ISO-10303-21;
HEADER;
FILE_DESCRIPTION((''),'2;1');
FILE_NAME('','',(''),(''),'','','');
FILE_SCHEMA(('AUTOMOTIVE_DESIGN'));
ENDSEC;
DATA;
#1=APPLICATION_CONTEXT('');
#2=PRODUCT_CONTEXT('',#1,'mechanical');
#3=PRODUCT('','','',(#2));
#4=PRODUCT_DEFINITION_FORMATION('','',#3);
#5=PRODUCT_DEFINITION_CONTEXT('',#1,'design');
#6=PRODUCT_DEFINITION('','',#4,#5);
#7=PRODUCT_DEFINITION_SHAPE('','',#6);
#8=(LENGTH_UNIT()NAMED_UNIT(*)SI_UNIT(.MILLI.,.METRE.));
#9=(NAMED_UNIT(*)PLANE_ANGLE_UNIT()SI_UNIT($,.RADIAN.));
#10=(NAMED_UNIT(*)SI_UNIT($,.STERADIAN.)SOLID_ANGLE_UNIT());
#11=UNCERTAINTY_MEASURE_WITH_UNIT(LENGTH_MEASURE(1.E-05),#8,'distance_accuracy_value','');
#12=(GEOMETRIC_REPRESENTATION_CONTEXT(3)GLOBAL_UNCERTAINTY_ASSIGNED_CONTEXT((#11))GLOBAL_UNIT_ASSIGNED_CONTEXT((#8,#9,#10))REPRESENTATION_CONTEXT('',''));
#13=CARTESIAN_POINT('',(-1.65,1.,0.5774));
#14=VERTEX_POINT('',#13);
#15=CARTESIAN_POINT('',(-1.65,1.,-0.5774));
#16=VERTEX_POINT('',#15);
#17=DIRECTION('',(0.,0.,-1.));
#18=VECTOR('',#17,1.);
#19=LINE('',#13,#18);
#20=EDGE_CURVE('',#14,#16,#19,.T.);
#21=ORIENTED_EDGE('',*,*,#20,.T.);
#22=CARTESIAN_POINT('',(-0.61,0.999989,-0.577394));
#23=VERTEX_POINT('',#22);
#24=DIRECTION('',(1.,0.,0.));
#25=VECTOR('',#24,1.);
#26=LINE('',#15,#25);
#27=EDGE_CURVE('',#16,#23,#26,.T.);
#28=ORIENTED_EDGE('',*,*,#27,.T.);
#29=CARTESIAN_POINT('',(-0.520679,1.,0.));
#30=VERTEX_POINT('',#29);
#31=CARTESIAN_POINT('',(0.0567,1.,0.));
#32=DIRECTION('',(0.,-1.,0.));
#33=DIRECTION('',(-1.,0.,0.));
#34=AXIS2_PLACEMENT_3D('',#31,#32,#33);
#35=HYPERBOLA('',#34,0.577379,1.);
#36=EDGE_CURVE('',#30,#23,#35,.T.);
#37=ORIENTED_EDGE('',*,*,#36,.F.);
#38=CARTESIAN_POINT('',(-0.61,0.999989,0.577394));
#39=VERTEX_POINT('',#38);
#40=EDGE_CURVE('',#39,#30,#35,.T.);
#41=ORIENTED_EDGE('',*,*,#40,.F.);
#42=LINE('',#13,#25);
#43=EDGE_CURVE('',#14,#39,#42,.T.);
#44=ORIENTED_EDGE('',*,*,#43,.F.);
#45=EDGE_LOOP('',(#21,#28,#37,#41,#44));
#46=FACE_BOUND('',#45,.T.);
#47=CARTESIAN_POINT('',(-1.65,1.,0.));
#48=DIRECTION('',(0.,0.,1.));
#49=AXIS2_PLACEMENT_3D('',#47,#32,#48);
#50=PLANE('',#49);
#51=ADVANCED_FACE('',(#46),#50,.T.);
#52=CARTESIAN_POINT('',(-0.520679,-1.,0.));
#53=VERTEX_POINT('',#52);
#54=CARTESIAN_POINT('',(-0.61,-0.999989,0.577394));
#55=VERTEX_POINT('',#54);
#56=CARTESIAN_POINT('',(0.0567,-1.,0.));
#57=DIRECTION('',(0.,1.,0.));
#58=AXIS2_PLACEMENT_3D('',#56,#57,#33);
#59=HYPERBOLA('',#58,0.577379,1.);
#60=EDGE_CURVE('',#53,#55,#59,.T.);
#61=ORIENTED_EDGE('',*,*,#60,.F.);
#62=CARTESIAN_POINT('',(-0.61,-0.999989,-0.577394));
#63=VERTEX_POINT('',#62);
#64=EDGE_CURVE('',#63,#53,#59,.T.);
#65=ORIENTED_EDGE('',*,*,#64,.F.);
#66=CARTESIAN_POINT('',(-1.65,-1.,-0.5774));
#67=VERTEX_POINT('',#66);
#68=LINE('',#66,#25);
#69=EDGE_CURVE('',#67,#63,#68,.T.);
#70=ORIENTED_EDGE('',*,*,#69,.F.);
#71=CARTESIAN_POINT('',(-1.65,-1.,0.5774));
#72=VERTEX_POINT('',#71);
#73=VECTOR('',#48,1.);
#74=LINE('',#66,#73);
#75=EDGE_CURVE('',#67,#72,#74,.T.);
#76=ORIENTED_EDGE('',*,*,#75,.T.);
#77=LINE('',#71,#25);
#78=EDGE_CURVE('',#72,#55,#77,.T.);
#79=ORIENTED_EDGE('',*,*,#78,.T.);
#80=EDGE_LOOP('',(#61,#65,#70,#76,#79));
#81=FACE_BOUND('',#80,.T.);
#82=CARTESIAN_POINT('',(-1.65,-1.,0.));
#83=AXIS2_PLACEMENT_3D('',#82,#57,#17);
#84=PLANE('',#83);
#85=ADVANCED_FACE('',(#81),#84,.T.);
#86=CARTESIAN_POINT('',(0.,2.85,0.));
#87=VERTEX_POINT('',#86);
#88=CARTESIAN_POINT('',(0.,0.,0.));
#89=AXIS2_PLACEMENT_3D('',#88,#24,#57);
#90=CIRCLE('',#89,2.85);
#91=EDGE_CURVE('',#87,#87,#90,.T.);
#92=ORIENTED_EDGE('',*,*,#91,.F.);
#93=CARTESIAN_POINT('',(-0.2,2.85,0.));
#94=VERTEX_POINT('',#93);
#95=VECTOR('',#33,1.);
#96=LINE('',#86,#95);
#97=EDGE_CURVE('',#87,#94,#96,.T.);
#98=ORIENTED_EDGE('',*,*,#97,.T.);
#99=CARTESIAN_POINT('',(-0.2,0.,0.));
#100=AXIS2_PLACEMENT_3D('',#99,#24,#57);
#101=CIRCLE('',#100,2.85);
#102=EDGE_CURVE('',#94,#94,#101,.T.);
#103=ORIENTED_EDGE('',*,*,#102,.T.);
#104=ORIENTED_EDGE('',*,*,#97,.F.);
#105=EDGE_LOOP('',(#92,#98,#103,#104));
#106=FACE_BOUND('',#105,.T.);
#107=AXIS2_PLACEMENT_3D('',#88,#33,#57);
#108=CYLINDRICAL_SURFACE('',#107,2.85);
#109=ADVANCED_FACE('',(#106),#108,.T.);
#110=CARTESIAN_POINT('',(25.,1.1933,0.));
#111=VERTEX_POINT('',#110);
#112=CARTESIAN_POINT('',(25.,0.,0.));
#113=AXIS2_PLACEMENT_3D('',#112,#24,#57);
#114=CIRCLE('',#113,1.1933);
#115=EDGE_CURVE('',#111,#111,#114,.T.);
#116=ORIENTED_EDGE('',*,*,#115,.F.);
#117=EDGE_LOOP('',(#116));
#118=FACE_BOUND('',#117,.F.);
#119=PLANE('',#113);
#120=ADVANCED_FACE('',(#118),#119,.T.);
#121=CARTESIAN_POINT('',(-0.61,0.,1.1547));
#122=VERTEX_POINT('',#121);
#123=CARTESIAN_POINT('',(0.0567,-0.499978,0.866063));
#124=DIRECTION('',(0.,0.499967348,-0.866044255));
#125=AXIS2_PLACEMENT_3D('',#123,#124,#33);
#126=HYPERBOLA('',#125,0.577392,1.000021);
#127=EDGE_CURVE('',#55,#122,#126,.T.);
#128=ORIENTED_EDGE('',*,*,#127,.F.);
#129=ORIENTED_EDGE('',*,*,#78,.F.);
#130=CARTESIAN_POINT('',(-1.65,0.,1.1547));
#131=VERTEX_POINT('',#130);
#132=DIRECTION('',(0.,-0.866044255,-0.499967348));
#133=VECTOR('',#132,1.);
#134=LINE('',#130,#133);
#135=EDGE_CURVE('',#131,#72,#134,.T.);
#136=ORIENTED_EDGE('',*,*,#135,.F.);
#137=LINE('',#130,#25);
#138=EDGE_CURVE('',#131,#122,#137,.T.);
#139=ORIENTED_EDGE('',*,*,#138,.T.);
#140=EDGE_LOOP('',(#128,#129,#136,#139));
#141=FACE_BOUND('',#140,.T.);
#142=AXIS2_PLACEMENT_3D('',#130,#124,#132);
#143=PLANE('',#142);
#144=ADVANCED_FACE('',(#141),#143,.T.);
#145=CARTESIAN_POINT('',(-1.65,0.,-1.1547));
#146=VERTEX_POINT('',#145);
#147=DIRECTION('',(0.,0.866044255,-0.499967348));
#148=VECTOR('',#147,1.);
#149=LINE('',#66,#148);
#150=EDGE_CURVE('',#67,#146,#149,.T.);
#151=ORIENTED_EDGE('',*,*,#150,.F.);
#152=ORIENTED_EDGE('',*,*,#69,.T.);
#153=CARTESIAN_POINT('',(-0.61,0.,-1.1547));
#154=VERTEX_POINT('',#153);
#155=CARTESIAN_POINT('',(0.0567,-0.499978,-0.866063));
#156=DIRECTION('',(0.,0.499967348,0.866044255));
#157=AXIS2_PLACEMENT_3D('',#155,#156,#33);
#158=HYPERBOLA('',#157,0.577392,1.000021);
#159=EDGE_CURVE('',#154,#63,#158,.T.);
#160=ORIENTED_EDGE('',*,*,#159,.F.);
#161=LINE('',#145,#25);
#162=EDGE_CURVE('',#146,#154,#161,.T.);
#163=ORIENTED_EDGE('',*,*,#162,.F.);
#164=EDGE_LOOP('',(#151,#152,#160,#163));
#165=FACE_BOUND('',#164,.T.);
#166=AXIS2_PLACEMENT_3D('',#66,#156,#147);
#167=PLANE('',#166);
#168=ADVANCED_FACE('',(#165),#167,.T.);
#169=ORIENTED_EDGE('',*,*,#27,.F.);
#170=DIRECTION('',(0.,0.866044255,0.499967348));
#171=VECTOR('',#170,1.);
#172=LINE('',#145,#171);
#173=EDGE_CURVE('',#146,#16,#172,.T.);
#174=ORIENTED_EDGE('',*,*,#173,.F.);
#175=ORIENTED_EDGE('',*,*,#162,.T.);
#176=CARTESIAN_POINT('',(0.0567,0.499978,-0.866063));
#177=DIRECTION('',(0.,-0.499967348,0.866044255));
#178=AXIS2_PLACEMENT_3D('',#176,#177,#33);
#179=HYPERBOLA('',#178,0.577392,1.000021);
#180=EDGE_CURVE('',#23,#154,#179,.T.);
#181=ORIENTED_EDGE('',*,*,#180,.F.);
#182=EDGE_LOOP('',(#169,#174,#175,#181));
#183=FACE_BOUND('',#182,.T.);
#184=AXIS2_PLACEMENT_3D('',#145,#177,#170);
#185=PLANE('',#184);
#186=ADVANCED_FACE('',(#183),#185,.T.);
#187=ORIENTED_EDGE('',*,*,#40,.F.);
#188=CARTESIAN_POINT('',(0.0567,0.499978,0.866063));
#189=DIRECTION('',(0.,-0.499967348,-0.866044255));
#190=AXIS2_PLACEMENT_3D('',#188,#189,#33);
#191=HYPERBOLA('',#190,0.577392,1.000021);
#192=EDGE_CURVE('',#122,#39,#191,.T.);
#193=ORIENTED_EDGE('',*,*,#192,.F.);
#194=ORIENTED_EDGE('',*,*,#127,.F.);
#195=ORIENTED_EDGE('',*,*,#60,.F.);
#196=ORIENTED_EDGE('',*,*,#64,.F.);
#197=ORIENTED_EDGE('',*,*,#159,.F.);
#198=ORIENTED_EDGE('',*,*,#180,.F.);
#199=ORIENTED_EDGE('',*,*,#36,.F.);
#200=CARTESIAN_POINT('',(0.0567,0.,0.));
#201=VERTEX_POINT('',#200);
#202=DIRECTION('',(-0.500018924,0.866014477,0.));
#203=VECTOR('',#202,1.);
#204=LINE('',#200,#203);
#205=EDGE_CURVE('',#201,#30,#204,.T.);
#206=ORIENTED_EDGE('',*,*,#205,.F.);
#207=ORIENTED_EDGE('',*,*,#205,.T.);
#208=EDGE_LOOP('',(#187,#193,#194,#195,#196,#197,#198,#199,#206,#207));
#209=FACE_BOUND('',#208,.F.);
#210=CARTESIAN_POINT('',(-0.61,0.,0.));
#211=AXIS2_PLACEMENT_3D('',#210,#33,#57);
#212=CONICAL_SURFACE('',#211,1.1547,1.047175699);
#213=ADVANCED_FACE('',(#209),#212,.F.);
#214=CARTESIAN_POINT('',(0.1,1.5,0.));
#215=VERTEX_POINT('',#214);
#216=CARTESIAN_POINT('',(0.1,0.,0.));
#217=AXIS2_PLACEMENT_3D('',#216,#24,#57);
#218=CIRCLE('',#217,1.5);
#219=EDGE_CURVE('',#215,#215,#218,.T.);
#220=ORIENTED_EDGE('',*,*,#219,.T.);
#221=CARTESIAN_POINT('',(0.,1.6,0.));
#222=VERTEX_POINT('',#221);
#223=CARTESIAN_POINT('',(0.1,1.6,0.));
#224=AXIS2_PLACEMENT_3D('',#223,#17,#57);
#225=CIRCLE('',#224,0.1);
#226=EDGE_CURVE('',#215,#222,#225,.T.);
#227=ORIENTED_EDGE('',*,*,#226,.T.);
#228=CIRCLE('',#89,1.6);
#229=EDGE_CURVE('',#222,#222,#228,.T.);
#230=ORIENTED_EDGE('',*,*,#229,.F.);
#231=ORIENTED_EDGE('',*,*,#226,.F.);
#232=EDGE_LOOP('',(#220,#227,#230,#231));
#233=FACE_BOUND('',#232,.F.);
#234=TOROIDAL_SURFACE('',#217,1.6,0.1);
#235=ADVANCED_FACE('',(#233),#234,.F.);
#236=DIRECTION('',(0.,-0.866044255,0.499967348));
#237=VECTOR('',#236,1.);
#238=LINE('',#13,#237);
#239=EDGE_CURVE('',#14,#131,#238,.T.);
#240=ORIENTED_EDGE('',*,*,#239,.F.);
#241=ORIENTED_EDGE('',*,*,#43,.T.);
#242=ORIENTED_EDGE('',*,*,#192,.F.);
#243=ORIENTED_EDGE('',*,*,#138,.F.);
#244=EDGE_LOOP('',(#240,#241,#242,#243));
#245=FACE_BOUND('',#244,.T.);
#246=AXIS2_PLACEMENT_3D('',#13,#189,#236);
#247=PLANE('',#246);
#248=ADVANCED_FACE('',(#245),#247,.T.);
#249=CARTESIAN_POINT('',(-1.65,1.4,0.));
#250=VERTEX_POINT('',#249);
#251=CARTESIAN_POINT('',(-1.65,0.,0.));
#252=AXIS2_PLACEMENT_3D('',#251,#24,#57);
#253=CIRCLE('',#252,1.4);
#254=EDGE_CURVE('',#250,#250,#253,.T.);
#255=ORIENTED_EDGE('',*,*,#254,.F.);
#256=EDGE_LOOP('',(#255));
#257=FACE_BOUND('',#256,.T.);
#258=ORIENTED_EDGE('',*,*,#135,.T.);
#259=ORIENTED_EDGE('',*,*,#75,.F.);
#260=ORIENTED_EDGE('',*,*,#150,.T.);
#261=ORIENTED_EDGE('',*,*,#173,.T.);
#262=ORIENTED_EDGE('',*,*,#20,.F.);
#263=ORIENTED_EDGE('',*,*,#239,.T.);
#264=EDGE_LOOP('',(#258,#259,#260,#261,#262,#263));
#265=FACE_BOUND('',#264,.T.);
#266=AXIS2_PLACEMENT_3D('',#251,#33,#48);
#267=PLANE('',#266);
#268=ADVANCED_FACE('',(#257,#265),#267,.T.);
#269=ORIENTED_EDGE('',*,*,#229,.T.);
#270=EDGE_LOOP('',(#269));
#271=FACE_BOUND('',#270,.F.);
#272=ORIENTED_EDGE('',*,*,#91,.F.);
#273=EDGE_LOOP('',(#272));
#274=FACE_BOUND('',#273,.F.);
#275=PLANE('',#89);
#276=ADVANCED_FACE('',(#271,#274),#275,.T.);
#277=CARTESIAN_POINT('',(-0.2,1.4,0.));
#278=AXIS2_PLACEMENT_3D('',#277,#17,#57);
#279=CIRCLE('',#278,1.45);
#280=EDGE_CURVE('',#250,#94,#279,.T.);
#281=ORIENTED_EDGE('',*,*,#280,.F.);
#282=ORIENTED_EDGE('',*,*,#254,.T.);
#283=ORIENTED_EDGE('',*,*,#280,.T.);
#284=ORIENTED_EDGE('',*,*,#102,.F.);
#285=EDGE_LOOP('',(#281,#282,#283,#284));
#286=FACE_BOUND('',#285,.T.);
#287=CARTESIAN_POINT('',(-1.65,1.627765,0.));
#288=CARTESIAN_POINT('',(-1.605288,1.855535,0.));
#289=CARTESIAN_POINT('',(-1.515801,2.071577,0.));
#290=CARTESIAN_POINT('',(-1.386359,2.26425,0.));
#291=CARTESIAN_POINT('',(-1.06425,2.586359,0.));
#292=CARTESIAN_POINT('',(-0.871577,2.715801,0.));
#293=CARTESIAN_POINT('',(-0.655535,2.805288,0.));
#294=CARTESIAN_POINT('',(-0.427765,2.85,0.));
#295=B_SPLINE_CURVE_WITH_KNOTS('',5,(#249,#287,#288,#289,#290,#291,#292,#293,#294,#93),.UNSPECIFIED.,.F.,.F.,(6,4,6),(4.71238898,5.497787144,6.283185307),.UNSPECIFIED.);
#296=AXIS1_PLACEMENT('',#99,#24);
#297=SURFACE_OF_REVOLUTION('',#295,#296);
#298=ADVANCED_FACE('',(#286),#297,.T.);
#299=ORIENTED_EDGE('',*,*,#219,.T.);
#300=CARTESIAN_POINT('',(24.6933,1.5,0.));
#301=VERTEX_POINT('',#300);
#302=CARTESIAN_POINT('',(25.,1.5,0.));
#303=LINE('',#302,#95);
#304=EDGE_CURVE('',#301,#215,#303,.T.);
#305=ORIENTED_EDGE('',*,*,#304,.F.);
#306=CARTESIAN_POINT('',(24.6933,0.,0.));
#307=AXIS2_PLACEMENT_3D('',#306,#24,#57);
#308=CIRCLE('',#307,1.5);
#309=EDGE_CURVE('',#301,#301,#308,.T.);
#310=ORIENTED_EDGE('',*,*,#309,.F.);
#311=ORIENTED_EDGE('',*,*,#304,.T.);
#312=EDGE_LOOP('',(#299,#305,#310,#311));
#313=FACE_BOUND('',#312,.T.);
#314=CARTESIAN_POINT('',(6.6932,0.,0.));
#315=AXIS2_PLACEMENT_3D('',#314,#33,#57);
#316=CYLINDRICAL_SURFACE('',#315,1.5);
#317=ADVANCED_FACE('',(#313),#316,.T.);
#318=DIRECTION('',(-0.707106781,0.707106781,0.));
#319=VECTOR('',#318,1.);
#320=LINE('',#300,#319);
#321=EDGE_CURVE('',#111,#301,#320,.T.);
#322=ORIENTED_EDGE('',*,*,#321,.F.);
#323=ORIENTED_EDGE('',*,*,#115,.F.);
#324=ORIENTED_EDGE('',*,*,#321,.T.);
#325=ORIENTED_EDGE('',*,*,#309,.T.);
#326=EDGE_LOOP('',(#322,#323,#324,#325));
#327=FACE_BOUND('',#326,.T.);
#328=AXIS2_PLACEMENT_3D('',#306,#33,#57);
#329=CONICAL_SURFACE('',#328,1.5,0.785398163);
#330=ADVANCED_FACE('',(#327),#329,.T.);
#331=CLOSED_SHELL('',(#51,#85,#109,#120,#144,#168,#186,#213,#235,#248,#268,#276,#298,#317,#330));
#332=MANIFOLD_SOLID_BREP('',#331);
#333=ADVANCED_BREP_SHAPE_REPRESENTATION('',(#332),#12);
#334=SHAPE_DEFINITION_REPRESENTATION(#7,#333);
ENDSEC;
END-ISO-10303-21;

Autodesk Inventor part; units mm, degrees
ref_plane "YZ Plane" through (0, 0, 0) normal (1, 0, 0) x (0, 1, 0)
ref_plane "XZ Plane" through (0, 0, 0) normal (0, 1, 0) x (-1, 0, 0)
sketch "Sketch1" plane through (0, 0, 0) normal (0, 0, 1) x (1, 0, 0)
  line L0 (0.0567, 0) -> (25, 0)
  line L1 (25, 0) -> (25, 1.5)
  line L2 (25, 1.5) -> (7, 1.5)
  line L3 (7, 1.5) -> (6.6932, 1.5)
  line L4 (6.6932, 1.5) -> (0, 1.5)
  line L5 (0, 1.5) -> (0, 2.85)
  line L6 (0, 2.85) -> (-1.65, 2.85)
  line L7 (-1.65, 2.85) -> (-1.65, 1.1547)
  line L8 (-1.65, 1.1547) -> (-0.61, 1.1547)
  line L9 (-0.61, 1.1547) -> (0.0567, 0)
  line L10 (-6.98, 0) -> (30.33, 0) projected
  line L11 (0, -0.57) -> (0, 3.42) projected
  line L12 (7, 1.5) -> (0, 1.5) construction
  dimension "d1" = 18
  dimension "d2" = 0.3068
  dimension "d3" = 1.65
  dimension "d4" = 1.04
  dimension "d5" = 60
  dimension "d6" = 3
  dimension "d7" = 3
  dimension "d8" = 2.3094
  dimension "d9" = 5.7
  dimension "d26" = 25
revolve "Body" add sketch "Sketch1" angle 360 about axis through (0.0567, 0, 0) along (1, 0, 0) contours L9 L11 L4 L3 L2 L1 L0 | L9 L8 L7 L6 L5 L11
sketch "Sketch2" plane through (-1.65, 0, 0) normal (-1, 0, 0) x (0, 0, 1)
  circle A0 centre (0, 0) radius 1.1547 projected
  line L0 (0, -3.99) -> (0, 3.99) projected
  line L1 (-3.99, 0) -> (3.99, 0) projected
  line L2 (1.1547, 0) -> (0.5774, -1)
  line L3 (0.5774, -1) -> (-0.5774, -1)
  line L4 (-0.5774, -1) -> (-1.1547, 0)
  line L5 (-1.1547, 0) -> (-0.5774, 1)
  line L6 (-0.5774, 1) -> (0.5774, 1)
  line L7 (0.5774, 1) -> (1.1547, 0)
extrude "Slot" add sketch "Sketch2" against normal up to next contours L7 A0 | A0 L2 | L6 L0 A0 | A0 L0 L3 | L0 L6 A0 | A0 L3 L0 | L4 A0 | A0 L5
fillet "Fillet1" radius 1.45 1 edges at (-1.65, -2.85, 0)
thread "Thread" size "M3x0.5" class "6g" standard "ISO Metric profile" length 18
chamfer "Chamfer1" distance 0.3067 distance2 0.3067 1 edges at (25, -1.5, 0) measured on face at (25, 0.2885, 0.9187)
ref_plane "Work Plane1" through (29, 0, 0) normal (0, -1, 0) x (1, 0, 0)
fillet "Fillet2" radius 0.1 1 edges at (0, -1.5, 0)
equation "\"d30\" = R"
equation "\"d17\" = RR"
equation "\"d13\" = GEL"
equation "\"d15\" = -0.5 * SPD + 0.5 * GD"
equation "\"d16\" = GUL"
equation "\"d1\" = GEL"
equation "\"d3\" = KOH"
equation "\"d4\" = INTI"
equation "\"d6\" = GD"
equation "\"d7\" = BDM"
equation "\"d8\" = 1.1547 * SW"
equation "\"d9\" = KOD"
equation "\"d26\" = NLG"
equation "\"GD\" = NND"
equation "\"NLG\" = 25"
equation "\"GEL\" = 18"
equation "\"KOD\" = 5.7"
equation "\"KOH\" = 1.65"
equation "\"INTI\" = 1.04"
equation "\"GAL\" = 0.61345 * PTC"
equation "\"GUL\" = 0.61345 * PTC"
equation "\"BDM\" = NND"
equation "\"SW\" = 2"
equation "\"RR\" = 1.45"
equation "\"SPD\" = NND - 1.2269 * PTC"
equation "\"R\" = 0.1"
equation "\"TOA\" = 30deg"
equation "\"GD1\" = THREADDIA - 1.2269 * PTC"
equation "\"THREADDIA\" = 3"
equation "\"PTC\" = 0.5"
equation "\"NND\" = 3"
equation "\"KOH1\" = 0.2"
equation "\"E0\" = 2.303"
properties part number "ISO 7380-1 - M3 x 25" material "Steel"
